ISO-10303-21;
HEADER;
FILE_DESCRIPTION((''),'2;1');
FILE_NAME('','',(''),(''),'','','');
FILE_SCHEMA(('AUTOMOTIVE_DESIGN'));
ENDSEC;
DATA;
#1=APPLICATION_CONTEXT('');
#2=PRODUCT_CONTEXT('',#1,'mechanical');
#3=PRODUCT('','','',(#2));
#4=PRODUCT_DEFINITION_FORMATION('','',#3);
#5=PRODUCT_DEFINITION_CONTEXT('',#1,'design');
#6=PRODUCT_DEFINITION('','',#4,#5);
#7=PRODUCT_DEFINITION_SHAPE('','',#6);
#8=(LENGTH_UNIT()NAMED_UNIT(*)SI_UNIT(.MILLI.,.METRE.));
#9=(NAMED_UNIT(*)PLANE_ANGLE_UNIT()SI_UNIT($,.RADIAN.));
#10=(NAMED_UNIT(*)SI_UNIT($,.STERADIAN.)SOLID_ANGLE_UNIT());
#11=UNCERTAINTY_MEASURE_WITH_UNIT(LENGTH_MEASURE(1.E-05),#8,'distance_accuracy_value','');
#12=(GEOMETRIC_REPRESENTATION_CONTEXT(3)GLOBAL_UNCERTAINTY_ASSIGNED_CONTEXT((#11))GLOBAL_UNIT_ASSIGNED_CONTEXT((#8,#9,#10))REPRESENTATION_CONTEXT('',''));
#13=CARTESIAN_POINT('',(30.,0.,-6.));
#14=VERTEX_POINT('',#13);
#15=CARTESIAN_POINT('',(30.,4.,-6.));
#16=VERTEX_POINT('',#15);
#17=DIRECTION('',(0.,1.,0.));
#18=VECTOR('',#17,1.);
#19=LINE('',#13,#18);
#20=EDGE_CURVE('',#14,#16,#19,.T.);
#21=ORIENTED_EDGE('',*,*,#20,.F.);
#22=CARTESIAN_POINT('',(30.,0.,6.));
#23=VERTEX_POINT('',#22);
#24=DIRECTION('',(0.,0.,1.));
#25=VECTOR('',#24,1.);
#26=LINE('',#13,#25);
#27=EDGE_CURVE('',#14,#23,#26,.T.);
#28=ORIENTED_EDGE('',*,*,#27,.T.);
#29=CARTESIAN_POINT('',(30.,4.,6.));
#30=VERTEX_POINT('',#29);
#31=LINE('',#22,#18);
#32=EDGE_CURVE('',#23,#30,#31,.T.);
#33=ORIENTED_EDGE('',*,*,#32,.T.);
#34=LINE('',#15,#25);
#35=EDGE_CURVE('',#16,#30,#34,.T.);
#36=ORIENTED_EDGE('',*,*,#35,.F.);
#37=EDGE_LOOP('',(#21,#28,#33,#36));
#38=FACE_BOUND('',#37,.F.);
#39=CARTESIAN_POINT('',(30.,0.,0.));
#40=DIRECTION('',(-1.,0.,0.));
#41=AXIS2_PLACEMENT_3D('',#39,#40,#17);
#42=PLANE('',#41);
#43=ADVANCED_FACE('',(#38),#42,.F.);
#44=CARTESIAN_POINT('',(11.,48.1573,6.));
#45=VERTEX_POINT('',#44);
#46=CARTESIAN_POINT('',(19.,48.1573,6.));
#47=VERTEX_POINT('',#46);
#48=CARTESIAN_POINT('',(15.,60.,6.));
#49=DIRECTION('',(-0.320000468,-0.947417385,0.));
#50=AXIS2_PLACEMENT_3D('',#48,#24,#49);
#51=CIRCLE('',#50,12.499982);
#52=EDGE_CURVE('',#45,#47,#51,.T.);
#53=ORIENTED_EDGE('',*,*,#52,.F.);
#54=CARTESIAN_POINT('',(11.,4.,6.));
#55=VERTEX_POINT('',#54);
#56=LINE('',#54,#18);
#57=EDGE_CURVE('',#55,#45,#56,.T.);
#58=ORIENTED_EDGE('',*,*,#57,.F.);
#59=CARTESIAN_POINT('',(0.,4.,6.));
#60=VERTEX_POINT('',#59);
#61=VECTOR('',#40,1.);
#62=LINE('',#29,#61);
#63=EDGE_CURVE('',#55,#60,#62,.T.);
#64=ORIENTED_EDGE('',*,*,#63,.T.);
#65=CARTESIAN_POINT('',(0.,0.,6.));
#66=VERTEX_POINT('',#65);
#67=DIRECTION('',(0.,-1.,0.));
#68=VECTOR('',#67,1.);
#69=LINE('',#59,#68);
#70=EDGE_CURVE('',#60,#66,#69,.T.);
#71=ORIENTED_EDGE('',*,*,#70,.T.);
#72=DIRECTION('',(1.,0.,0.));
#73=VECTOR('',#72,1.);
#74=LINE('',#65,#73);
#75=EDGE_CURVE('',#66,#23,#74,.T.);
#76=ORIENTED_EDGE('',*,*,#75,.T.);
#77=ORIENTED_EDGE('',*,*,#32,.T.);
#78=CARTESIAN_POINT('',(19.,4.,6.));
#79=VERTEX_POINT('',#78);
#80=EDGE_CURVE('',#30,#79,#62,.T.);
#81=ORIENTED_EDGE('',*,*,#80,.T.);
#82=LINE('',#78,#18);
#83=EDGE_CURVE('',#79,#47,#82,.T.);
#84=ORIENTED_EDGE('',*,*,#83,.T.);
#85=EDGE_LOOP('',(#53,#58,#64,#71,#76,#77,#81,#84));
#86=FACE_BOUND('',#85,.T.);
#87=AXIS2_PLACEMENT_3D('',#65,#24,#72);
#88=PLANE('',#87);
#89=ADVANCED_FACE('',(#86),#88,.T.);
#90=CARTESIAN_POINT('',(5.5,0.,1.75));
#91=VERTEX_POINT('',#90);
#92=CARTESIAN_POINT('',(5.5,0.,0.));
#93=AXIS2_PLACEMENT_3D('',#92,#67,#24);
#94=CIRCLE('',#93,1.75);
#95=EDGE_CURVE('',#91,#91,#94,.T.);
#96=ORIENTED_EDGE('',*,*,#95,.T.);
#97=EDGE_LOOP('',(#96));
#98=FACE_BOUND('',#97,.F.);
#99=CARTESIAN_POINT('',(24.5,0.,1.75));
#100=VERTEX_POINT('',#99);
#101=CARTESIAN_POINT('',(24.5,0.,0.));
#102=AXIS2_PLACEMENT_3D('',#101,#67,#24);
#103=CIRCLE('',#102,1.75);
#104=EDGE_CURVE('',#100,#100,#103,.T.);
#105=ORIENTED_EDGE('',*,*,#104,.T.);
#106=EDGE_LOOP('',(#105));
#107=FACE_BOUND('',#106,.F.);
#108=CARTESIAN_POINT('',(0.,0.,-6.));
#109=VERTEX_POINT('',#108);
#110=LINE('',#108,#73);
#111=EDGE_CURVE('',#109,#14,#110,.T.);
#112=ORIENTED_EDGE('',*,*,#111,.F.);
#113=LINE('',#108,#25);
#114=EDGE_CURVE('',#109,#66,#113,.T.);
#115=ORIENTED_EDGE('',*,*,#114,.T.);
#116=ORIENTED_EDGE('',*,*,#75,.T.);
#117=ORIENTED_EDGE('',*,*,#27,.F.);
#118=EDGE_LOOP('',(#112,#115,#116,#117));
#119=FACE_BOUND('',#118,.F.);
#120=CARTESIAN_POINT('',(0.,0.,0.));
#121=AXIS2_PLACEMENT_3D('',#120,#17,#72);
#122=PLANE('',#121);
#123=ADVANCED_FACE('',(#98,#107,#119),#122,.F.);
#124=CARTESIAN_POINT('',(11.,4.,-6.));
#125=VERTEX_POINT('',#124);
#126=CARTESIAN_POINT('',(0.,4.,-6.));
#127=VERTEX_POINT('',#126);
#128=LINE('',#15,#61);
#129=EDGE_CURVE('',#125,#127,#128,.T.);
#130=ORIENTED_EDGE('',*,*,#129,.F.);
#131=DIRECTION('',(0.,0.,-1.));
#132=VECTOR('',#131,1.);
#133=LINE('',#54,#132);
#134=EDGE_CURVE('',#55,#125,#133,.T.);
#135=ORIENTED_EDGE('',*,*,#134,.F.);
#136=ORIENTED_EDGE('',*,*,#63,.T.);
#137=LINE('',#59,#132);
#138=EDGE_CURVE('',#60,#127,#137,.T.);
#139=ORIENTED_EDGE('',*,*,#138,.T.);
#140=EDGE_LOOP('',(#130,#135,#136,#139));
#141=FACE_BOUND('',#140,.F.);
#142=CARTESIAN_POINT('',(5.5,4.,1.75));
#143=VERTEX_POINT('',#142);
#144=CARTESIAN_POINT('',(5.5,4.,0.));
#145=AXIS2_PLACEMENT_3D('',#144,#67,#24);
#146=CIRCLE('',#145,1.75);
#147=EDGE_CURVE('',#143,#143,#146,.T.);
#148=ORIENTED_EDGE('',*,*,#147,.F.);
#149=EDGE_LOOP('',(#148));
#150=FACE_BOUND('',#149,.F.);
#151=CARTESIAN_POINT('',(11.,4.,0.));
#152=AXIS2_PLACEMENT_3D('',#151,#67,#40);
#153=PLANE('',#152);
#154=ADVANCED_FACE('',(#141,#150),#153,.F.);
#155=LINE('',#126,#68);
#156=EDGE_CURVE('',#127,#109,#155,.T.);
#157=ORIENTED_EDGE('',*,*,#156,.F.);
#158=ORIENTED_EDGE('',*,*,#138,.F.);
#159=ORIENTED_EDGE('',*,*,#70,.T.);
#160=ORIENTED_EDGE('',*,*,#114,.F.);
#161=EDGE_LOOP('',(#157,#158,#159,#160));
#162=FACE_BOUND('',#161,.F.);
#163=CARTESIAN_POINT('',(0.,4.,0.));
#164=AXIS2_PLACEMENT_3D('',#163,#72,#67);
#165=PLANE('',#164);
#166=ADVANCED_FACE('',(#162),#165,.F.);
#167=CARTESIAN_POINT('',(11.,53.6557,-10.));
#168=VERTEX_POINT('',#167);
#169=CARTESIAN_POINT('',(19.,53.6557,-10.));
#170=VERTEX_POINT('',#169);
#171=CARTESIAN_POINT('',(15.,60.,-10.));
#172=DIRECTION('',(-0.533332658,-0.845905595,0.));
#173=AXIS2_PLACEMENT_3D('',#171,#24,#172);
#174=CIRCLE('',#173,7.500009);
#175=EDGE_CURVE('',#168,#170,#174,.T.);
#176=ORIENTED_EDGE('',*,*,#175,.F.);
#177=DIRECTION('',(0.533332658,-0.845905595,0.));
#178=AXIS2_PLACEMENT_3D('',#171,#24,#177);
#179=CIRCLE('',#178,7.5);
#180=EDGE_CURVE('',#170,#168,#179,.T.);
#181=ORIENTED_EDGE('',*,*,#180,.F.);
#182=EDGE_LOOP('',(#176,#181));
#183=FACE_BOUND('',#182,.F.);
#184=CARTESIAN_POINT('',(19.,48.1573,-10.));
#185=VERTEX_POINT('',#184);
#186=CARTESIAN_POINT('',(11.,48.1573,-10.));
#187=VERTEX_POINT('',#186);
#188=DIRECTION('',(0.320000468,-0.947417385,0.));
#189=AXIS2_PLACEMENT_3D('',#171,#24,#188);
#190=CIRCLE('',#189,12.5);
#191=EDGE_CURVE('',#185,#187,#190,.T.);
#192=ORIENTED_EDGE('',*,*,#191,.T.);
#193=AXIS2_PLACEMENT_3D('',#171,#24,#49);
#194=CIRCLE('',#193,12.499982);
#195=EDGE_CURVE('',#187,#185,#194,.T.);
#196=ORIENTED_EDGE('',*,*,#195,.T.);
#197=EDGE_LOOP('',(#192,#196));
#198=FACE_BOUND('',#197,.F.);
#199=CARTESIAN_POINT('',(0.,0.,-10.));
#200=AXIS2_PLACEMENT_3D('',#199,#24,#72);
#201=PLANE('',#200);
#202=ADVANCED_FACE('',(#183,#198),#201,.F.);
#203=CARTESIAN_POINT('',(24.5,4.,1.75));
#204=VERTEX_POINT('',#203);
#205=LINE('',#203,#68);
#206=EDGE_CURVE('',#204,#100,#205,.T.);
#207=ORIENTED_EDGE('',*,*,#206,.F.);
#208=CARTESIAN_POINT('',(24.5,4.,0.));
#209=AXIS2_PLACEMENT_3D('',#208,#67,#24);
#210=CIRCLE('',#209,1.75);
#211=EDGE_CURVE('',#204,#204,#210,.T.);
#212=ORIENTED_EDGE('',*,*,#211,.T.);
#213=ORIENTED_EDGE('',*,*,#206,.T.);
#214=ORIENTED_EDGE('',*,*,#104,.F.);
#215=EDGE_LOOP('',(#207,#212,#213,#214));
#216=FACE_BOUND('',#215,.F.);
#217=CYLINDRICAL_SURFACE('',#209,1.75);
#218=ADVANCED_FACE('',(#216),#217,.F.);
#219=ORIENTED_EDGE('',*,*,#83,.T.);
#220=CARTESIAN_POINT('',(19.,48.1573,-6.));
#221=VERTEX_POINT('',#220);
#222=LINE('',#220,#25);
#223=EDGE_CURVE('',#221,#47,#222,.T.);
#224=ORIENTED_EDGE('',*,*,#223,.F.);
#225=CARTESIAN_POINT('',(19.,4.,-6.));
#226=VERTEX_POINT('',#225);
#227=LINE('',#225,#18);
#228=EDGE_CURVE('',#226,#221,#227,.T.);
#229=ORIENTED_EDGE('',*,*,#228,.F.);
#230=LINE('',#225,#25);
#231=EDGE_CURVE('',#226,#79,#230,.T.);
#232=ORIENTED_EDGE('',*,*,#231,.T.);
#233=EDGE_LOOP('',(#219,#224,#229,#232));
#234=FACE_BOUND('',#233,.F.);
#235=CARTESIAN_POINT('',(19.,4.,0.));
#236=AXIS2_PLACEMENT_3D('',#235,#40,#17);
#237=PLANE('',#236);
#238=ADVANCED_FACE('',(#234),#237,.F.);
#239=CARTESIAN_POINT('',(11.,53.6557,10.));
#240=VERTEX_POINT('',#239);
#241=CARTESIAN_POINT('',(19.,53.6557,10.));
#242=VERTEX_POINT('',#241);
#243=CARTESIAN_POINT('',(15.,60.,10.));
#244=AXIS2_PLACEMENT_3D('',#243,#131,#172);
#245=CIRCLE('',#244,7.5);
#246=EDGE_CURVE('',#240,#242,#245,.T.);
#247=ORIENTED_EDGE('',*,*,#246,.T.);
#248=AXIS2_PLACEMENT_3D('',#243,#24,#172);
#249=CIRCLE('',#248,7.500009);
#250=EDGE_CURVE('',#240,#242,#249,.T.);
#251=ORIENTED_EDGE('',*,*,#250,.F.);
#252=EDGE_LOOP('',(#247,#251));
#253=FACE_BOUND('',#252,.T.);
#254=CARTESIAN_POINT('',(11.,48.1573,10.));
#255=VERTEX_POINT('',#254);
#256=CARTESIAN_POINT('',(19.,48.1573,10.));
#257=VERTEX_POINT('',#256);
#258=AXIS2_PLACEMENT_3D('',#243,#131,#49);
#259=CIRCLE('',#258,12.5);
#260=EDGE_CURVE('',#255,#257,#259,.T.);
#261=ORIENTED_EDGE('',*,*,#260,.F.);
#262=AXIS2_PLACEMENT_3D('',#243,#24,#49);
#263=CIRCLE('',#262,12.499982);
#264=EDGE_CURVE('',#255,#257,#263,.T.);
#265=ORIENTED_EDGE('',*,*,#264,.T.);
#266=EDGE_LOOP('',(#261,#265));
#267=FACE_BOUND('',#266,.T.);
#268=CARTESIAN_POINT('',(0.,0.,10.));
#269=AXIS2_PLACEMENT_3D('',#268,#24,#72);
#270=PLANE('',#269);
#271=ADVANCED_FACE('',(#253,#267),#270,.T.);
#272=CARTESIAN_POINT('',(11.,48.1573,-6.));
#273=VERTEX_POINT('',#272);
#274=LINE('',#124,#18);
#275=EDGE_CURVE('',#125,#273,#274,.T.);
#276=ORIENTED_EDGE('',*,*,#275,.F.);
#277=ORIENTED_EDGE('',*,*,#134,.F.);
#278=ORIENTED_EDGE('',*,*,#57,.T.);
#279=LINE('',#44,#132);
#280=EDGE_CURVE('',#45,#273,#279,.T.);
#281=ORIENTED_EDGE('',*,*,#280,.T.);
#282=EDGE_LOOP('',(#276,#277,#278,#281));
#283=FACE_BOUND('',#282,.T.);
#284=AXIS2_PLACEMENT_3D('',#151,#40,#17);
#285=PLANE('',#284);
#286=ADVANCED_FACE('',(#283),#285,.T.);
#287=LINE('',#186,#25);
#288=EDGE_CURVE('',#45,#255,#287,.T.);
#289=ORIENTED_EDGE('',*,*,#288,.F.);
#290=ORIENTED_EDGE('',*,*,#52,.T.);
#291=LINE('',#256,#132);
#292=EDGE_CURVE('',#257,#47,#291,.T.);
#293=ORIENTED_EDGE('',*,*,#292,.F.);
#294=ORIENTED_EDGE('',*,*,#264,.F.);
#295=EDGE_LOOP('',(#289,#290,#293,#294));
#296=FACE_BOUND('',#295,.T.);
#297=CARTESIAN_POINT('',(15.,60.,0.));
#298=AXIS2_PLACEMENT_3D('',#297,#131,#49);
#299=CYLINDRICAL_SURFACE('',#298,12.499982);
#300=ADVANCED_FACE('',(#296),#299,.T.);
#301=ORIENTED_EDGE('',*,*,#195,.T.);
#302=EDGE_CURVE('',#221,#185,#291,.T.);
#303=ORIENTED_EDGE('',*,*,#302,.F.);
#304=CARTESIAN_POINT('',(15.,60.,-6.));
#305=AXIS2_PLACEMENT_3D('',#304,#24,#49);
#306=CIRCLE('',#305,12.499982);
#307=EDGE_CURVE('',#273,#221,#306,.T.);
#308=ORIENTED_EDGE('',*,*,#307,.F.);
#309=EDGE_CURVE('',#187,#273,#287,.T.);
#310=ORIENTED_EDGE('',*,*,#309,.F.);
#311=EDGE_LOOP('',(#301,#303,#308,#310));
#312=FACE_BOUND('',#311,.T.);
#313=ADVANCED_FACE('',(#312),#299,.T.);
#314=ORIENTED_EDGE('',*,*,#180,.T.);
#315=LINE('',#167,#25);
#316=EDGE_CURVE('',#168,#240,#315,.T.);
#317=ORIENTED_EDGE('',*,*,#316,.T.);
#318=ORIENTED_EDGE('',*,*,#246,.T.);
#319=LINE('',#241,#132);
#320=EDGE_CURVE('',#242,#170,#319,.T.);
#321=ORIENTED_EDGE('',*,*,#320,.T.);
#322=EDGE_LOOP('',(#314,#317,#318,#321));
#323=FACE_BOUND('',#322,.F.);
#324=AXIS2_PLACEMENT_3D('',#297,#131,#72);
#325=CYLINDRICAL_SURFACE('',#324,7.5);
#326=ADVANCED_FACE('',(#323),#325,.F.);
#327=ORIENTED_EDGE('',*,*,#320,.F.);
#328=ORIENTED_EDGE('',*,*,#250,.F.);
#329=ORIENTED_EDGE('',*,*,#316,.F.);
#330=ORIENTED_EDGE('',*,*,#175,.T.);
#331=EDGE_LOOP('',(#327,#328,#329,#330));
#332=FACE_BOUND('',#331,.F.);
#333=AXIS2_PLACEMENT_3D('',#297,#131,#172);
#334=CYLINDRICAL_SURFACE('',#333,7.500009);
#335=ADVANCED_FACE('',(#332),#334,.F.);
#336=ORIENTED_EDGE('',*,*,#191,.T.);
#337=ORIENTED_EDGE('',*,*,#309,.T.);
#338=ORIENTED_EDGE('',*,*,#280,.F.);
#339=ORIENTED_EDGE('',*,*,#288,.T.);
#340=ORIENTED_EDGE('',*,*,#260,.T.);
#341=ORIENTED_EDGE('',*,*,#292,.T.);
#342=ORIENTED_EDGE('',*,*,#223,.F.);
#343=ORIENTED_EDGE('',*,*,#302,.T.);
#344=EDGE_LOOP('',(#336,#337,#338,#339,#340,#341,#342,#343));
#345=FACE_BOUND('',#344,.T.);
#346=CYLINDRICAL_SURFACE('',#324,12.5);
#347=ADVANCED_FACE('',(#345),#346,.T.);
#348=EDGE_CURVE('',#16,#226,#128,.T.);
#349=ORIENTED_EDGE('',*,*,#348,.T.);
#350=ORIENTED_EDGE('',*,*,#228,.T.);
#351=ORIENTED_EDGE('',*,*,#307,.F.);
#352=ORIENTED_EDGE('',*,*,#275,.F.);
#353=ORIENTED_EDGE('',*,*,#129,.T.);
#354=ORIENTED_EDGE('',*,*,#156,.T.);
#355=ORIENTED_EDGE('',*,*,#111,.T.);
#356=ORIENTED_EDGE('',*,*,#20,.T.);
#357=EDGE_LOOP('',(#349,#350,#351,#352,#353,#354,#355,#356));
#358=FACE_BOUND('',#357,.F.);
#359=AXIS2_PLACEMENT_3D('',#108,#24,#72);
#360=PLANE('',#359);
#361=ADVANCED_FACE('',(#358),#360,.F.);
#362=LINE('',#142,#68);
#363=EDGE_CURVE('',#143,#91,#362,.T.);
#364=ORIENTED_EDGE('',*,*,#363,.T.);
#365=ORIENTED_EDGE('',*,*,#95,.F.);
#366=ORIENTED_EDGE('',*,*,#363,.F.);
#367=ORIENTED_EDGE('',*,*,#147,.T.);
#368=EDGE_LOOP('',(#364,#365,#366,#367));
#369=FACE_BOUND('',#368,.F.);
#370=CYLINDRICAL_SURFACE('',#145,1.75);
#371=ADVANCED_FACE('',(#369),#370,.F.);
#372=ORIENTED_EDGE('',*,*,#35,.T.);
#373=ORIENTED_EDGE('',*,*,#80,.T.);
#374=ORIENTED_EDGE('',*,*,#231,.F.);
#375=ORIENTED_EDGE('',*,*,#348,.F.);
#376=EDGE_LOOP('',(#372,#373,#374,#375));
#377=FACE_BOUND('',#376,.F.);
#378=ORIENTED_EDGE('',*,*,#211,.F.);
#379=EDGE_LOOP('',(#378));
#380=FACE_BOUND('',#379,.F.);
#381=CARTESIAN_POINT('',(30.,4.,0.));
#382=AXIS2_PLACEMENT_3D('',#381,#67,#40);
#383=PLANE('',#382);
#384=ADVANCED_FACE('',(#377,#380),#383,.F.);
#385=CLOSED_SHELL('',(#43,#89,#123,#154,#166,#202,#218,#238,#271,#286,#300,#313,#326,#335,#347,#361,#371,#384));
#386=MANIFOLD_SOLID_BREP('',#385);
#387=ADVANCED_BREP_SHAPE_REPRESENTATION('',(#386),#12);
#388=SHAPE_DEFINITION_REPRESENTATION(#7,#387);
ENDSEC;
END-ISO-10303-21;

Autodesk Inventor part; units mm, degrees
ref_plane "YZ Plane" through (0, 0, 0) normal (1, 0, 0) x (0, 1, 0)
ref_plane "XZ Plane" through (0, 0, 0) normal (0, 1, 0) x (-1, 0, 0)
ref_plane "XY Plane" through (0, 0, 0) normal (0, 0, 1) x (1, 0, 0)
sketch "Sketch1" plane through (0, 0, 0) normal (0, 0, 1) x (1, 0, 0)
  line L0 (0, 0) -> (30, 0)
  line L1 (30, 0) -> (30, 4)
  line L2 (30, 4) -> (0, 4)
  line L3 (0, 4) -> (0, 0)
  line L4 (15, 4) -> (11, 4)
  line L5 (15, 4) -> (19, 4)
  line L6 (11, 4) -> (11, 60)
  line L7 (19, 4) -> (19, 60)
  line L8 (11, 60) -> (19, 60)
  circle A0 centre (15, 60) radius 7.5
  circle A1 centre (15, 60) radius 12.5
  arc A2 (11, 48.1573) -> (19, 48.1573) centre (15, 60) ccw
  arc A3 (11, 53.6557) -> (19, 53.6557) centre (15, 60) ccw
  dimension "d0" = 30
  dimension "d1" = 4
  dimension "d2" = 4
  dimension "d3" = 4
  dimension "d5" = 60
  dimension "d6" = 15
  dimension "d7" = 25
extrude "Extrusion1" add sketch "Sketch1" along normal mid plane 12 contours L3 L2 L1 L0 | L6 A1 L7 L2
extrude "Extrusion2" add sketch "Sketch1" along normal mid plane 20 contours A1 L7 A0 L6 | L6 A0 L7 A1
sketch "Sketch2" plane through (19, 4, 6) normal (0, 1, 0) x (1, 0, 0)
  line L0 (0, 12) -> (0, 0) projected
  line L1 (11, 0) -> (0, 0) projected
  line L2 (11, 12) -> (11, 0) projected
  line L3 (0, 12) -> (11, 12) projected
  line L4 (0, 6) -> (11, 6)
  point P0 (-19, 6)
  point P1 (5.5, 6)
hole "Hole1" at (24.5, 4, 0) direction (0, -1, 0) diameter 3.5 end up to surface
ref_plane "Work Plane1" through (15, 4, -6) normal (-1, 0, 0) x (0, 0, 1)
mirror "Mirror1" about plane through (15, 4, -6) normal (-1, 0, 0) of "Hole1"
equation "\"d2\" = d3"
properties part number "rearSight"
